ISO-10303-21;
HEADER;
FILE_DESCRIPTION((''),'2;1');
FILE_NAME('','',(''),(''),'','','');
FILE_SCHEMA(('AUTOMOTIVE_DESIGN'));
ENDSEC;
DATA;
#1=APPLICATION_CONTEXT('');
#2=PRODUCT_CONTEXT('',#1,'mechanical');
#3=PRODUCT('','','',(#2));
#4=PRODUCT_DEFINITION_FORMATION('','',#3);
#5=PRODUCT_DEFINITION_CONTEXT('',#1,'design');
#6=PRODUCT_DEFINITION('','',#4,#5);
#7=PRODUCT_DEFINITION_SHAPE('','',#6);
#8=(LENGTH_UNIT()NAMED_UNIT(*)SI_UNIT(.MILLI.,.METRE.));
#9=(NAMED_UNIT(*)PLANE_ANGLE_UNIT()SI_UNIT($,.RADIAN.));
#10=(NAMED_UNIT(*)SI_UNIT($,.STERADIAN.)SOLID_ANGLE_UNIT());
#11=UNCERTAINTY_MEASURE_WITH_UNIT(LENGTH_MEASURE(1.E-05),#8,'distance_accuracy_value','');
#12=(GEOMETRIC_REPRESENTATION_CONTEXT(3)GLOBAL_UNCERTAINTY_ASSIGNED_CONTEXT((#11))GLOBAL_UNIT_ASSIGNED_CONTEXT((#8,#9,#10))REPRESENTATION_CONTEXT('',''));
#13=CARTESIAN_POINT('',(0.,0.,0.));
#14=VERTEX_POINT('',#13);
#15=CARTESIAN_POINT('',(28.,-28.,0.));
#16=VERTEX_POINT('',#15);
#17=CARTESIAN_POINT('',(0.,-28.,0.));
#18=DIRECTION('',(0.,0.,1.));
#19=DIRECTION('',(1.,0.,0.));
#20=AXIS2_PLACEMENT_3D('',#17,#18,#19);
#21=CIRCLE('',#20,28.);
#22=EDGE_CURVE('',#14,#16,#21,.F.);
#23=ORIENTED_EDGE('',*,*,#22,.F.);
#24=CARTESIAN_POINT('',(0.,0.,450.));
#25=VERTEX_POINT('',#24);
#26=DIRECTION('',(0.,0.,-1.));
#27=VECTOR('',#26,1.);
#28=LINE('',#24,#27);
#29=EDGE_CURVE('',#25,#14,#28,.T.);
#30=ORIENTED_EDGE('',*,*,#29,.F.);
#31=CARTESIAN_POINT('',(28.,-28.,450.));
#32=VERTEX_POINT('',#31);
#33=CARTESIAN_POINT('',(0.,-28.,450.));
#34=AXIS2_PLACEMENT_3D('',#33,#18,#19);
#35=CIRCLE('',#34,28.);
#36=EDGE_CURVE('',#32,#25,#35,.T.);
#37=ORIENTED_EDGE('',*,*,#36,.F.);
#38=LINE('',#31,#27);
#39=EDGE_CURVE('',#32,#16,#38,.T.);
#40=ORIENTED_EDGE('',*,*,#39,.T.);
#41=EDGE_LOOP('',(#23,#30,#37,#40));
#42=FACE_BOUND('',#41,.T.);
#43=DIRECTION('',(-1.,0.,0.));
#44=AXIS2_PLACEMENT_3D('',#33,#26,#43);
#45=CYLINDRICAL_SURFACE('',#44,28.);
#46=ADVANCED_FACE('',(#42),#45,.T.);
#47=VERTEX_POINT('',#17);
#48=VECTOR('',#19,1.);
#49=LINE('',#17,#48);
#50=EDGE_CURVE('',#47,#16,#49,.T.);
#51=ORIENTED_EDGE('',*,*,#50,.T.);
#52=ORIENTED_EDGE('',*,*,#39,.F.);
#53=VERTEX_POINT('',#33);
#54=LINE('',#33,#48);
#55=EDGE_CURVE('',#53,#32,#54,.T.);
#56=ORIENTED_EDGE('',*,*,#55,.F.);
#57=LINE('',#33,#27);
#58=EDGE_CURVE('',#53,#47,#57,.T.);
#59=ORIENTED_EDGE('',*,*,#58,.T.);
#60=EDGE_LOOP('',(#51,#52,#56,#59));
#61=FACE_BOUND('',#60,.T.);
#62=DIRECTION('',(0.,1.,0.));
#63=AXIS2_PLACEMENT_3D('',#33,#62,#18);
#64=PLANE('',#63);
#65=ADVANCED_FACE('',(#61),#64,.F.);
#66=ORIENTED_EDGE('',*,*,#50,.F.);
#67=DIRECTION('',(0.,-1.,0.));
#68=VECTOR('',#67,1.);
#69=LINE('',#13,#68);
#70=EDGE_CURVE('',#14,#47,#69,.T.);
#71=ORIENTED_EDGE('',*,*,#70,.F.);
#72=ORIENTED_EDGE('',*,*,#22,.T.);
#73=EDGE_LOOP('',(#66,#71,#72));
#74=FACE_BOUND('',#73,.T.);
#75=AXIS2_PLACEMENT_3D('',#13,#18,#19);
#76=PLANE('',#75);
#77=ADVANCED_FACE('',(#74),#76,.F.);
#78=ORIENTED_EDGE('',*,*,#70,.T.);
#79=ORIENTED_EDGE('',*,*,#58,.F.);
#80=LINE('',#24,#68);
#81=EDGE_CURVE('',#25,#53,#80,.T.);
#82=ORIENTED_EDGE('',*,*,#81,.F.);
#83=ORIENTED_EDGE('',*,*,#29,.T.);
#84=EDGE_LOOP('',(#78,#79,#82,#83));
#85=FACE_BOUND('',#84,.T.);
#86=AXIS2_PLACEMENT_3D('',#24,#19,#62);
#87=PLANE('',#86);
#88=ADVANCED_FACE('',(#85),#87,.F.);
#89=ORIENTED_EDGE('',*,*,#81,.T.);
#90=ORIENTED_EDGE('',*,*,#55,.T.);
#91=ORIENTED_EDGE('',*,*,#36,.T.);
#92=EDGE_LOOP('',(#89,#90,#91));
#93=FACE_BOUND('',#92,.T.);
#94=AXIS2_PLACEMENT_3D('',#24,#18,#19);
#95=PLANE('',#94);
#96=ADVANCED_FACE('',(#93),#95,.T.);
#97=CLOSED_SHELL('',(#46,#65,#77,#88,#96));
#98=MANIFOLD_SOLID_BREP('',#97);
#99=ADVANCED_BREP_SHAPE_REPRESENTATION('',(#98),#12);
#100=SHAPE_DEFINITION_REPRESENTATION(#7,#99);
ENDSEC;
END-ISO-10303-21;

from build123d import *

# Parameters (mm, degrees)
ESQUISSE1_W        = 28
ESQUISSE1_H        = 28
BOSS_EXTRU_1_DEPTH = 450
CONG_1_R           = 28


with BuildPart() as part:
    # Esquisse1 → Boss.-Extru.1 (new body)
    with BuildSketch(Plane.XY):
        with Locations((14, -14)):
            Rectangle(ESQUISSE1_W, ESQUISSE1_H)
    extrude(amount=BOSS_EXTRU_1_DEPTH)

    # Congé1
    cong_1_edges = [part.edges().sort_by_distance(p)[0] for p in [
        (28, 0, 225),
    ]]
    fillet(cong_1_edges, radius=CONG_1_R - 0.0001)  # a hair under: the kernel refuses the full size


solid = part.part
